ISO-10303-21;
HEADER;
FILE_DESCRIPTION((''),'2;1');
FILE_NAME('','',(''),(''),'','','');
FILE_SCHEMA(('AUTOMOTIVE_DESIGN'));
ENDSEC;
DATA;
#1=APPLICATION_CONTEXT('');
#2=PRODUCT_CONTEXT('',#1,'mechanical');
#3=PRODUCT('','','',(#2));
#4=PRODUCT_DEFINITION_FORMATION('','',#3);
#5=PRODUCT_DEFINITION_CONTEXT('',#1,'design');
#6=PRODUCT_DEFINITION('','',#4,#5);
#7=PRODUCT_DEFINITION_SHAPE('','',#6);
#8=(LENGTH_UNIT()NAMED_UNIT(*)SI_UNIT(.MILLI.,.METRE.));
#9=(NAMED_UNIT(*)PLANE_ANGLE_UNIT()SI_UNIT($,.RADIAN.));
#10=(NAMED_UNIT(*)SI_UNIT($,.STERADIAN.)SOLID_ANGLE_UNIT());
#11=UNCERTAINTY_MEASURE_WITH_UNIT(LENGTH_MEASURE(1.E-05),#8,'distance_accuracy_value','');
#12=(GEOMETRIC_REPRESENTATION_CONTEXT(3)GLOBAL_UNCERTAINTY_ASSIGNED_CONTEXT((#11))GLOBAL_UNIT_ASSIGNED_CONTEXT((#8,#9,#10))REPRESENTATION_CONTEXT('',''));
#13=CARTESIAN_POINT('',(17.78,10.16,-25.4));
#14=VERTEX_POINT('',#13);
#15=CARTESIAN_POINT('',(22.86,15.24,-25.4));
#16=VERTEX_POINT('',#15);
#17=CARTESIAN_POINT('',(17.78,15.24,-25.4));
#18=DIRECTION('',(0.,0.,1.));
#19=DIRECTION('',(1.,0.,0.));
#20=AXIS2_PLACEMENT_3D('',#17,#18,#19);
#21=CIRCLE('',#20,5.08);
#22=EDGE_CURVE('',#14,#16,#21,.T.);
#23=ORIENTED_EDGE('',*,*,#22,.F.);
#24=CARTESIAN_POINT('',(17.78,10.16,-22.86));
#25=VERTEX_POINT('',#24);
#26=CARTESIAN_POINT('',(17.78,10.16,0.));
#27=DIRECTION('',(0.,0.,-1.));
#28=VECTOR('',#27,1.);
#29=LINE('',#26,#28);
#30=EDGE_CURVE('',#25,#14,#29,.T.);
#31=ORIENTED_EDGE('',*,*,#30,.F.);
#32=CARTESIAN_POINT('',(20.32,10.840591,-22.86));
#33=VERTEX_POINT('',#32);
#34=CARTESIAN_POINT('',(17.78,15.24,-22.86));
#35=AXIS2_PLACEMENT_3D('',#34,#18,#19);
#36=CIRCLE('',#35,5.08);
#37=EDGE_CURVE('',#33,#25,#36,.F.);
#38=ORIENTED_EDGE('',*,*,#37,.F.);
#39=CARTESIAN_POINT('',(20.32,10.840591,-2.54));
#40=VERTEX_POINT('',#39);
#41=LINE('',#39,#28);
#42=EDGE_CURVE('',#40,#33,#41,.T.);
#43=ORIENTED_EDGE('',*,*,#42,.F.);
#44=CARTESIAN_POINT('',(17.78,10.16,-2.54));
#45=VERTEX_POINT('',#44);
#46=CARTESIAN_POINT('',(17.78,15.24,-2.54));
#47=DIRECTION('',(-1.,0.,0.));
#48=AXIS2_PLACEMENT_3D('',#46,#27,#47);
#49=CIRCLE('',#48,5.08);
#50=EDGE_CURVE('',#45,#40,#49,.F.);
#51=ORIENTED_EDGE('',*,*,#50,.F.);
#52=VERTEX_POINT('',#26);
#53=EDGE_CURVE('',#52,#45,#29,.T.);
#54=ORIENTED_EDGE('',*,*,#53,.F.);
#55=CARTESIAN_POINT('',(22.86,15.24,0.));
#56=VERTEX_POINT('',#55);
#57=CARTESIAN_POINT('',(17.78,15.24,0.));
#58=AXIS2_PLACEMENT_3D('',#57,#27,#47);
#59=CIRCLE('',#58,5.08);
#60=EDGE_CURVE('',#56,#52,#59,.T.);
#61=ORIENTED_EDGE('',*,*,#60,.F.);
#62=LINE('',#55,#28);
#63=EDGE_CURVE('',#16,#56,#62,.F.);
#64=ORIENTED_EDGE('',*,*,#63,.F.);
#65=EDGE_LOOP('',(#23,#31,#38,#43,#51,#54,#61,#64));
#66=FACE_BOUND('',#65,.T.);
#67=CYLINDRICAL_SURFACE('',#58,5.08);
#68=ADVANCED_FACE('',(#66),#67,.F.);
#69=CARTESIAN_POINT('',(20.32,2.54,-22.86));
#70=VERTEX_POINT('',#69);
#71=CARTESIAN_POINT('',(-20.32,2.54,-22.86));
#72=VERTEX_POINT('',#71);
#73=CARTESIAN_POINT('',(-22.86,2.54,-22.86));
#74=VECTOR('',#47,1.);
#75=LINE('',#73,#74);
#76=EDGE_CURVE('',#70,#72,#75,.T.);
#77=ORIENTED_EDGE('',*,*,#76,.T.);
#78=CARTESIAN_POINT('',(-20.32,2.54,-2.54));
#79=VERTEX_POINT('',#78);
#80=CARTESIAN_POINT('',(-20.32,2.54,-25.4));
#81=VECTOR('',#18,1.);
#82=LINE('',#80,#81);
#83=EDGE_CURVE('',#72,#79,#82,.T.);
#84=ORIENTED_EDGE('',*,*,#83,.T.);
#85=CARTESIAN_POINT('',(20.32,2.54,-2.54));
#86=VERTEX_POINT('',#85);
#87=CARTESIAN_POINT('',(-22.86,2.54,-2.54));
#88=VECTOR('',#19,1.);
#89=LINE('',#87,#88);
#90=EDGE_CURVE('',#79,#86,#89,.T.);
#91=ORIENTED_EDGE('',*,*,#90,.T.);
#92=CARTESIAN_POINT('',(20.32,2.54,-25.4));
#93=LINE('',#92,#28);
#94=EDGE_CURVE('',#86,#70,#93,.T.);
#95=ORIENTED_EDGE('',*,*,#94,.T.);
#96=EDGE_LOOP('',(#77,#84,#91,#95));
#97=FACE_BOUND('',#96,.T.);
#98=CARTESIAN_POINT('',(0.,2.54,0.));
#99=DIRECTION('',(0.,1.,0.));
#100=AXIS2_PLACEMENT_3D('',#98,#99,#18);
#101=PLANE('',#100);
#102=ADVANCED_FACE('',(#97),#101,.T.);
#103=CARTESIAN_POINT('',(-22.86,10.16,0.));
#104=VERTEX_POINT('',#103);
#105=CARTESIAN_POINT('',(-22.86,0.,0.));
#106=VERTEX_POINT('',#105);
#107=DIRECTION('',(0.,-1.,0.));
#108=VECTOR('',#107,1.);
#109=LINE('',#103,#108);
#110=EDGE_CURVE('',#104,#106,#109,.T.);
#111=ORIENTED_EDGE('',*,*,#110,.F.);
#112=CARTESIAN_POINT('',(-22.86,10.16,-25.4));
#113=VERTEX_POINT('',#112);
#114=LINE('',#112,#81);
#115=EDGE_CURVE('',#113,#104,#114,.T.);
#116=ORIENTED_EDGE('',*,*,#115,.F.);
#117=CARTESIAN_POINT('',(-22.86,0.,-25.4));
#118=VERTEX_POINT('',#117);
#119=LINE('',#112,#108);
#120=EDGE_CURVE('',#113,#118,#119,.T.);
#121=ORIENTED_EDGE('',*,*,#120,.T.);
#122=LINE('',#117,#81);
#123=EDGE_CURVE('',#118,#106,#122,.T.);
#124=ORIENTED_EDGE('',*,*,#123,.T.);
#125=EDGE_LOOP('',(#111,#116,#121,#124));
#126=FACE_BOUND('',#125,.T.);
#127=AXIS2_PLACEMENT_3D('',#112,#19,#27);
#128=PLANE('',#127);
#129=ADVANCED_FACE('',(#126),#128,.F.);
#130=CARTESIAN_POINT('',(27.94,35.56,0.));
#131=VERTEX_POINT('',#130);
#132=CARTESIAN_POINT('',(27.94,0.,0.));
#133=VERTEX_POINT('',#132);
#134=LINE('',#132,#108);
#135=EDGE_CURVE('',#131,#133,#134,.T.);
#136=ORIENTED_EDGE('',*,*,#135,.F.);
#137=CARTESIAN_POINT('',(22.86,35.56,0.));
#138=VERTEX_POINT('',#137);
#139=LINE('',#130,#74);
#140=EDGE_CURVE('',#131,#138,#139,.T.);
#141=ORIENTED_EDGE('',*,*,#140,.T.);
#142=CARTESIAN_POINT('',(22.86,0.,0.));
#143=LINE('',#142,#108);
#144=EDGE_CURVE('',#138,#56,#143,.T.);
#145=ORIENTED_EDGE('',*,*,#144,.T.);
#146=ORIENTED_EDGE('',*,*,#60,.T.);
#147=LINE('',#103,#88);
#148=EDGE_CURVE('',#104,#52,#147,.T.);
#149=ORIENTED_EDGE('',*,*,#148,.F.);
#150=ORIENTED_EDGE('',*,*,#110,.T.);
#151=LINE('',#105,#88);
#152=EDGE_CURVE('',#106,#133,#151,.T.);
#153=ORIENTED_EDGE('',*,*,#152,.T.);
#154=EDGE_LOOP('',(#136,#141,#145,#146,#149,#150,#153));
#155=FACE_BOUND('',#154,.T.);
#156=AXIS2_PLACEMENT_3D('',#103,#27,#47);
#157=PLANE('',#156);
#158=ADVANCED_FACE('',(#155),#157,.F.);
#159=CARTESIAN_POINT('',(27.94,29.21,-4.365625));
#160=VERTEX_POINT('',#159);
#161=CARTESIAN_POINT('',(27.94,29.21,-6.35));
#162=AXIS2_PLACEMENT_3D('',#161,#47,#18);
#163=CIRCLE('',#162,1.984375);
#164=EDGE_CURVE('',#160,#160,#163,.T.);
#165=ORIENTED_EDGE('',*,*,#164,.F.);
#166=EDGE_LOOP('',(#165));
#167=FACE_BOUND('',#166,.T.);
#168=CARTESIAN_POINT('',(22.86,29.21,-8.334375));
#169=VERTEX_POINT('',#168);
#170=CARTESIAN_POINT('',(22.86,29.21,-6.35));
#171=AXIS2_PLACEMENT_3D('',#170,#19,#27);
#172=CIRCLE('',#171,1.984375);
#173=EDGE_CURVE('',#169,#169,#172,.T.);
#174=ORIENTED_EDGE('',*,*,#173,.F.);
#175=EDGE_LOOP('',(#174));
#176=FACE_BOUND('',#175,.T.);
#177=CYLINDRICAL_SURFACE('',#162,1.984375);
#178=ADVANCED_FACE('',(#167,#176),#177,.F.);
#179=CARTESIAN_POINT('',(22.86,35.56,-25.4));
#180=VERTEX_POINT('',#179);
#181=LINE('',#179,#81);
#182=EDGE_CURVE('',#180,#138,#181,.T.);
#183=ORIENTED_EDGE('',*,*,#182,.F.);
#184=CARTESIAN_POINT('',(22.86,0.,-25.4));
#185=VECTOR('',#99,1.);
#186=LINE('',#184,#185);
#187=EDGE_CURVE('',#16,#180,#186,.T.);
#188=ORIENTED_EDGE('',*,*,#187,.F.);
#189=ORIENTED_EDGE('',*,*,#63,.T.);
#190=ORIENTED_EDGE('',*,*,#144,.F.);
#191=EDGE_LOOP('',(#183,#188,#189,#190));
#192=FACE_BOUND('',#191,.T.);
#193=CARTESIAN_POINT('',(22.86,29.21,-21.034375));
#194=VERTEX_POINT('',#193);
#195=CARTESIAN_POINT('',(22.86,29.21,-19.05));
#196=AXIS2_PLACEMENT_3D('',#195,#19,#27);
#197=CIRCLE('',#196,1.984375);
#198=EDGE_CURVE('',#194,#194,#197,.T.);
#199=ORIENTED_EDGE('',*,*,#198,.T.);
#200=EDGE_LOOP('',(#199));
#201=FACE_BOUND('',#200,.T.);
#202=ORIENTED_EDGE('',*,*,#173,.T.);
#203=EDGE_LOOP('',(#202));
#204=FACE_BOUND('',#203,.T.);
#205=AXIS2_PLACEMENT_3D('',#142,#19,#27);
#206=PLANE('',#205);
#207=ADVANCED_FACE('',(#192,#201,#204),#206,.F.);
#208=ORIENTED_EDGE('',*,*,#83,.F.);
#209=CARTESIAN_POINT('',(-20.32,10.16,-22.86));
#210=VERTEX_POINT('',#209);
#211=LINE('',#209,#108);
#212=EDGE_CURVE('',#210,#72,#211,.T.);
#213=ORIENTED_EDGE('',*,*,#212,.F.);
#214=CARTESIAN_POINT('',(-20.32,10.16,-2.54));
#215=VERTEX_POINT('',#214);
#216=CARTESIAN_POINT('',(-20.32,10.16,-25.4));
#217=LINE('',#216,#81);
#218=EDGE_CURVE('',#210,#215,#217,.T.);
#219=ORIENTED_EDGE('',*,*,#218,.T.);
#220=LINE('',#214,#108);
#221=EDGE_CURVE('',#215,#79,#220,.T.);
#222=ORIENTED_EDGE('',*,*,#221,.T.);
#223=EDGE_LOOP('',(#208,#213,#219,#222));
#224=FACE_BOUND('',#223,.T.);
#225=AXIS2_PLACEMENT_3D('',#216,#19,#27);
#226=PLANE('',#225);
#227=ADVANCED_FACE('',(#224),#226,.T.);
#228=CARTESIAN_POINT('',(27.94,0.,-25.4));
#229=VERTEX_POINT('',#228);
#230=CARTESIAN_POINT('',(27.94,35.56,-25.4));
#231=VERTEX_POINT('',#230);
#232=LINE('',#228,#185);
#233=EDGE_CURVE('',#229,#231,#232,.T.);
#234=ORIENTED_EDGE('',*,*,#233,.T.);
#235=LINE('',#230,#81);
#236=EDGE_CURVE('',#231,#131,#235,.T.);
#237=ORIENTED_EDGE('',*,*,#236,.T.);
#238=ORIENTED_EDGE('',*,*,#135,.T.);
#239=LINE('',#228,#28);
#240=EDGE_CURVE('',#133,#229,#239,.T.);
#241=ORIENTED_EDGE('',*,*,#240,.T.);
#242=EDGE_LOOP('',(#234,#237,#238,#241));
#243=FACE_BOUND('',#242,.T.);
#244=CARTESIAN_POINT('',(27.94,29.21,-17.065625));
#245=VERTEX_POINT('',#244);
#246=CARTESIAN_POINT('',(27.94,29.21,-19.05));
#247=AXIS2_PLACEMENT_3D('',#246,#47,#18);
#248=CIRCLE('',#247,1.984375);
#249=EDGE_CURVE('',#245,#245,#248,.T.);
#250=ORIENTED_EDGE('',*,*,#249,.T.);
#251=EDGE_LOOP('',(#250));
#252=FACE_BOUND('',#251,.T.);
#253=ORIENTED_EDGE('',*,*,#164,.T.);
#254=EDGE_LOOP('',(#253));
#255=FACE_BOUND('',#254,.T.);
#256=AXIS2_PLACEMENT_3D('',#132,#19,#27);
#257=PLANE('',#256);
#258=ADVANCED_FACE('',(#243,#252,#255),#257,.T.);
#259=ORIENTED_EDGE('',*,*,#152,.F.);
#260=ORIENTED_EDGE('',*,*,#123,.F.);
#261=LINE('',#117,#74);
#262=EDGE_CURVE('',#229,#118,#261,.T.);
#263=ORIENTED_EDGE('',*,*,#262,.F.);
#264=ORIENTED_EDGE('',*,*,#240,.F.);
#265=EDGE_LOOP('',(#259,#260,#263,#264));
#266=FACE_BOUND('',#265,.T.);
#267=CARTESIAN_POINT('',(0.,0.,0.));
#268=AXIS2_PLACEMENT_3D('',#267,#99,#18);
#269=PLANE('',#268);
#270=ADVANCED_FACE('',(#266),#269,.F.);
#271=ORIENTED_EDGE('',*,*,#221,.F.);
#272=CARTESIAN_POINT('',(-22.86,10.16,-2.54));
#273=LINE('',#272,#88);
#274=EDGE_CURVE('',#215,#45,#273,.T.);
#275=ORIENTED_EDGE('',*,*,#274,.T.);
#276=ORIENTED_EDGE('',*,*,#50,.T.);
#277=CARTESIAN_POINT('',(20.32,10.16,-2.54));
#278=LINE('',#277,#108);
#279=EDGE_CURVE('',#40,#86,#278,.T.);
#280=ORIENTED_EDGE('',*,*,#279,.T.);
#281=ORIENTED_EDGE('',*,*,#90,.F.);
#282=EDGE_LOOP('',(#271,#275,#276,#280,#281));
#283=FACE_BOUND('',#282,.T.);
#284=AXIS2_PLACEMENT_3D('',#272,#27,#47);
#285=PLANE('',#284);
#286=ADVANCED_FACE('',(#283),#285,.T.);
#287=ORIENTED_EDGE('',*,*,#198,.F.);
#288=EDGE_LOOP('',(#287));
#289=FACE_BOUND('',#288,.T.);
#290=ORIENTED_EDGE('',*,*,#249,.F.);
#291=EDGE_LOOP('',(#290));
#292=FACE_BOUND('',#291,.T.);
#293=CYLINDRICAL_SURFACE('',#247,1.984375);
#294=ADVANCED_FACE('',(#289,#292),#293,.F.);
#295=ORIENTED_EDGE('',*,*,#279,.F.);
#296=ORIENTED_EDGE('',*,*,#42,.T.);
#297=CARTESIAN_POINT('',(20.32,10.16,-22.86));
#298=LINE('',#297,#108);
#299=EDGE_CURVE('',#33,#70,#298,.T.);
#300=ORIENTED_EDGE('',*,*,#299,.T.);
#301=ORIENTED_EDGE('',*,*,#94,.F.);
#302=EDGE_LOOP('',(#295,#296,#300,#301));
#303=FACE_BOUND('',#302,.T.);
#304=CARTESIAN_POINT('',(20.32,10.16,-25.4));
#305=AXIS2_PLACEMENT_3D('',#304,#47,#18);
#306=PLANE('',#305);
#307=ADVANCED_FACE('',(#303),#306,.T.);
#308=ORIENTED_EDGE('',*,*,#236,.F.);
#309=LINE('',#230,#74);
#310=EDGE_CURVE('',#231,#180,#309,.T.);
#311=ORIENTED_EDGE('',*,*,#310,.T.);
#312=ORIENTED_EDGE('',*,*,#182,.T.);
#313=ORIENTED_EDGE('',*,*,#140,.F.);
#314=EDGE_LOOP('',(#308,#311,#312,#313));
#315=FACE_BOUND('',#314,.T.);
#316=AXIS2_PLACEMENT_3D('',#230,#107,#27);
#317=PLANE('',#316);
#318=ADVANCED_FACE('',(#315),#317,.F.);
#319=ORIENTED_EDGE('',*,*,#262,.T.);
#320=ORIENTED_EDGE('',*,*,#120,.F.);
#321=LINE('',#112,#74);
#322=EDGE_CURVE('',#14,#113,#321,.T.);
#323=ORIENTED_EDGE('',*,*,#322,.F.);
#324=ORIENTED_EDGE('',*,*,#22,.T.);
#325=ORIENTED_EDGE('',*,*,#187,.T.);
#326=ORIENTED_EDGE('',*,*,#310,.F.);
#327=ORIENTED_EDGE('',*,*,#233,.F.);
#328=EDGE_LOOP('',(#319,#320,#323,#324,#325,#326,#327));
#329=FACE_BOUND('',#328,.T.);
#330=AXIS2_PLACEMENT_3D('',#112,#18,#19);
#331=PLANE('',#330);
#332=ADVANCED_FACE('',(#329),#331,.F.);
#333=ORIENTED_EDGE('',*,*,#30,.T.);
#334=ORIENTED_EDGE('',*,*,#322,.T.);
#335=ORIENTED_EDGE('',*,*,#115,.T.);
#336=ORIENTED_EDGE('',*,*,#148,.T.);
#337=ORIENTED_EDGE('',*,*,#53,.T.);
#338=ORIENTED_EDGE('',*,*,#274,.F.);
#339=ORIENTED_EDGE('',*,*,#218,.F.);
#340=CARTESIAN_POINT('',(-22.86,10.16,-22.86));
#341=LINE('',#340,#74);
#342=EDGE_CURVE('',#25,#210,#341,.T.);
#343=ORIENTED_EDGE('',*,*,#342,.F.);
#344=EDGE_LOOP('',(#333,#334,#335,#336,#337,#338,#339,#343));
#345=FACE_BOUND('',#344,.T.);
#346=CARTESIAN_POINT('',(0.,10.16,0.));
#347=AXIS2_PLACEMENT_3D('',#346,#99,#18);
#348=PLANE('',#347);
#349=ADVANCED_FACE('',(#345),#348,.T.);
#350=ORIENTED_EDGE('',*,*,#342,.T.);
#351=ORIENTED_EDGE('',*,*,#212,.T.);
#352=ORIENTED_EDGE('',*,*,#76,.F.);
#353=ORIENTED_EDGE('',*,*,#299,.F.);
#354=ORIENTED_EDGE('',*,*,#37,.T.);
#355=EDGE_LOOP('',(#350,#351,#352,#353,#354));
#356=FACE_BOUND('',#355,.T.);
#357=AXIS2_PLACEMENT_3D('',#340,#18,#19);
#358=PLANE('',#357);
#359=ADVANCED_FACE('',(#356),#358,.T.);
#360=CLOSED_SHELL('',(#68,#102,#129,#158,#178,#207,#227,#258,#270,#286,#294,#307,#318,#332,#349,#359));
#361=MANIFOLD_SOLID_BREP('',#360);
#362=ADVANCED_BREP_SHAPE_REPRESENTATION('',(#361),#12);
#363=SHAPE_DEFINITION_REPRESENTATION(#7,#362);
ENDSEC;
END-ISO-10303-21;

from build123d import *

# Parameters (mm, degrees)
SKETCH1_W               = 45.72
SKETCH1_H               = 25.4
BOSS_EXTRUDE1_DEPTH     = 10.16
SHELL1_T                = -2.54
SKETCH2_W               = 25.4
SKETCH2_H               = 35.56
BOSS_EXTRUDE2_DEPTH     = 5.08
FILLET1_R               = 5.08
CUT_EXTRUDE1_DEPTH      = 64.245489958
CUT_EXTRUDE1_DEPTH_BACK = 64.245489958
SKETCH3_R               = 1.984375


with BuildPart() as part:
    # Sketch1 → Boss-Extrude1 (new body)
    with BuildSketch(Plane(origin=(0, 0, 0), x_dir=(1, 0, 0), z_dir=(0, 1, 0))):
        with Locations((0, 12.7)):
            Rectangle(SKETCH1_W, SKETCH1_H)
    extrude(amount=BOSS_EXTRUDE1_DEPTH)

    # Shell1
    shell1_openings = [part.faces().sort_by_distance(p)[0] for p in [
        (0, 10.16, -12.7),
    ]]
    offset(amount=SHELL1_T, openings=shell1_openings, kind=Kind.INTERSECTION)

    # Sketch2 → Boss-Extrude2 (add)
    with BuildSketch(Plane(origin=(22.86, 0, 0), x_dir=(0, 0, -1), z_dir=(1, 0, 0))):
        with Locations((12.7, 17.78)):
            Rectangle(SKETCH2_W, SKETCH2_H)
    extrude(amount=BOSS_EXTRUDE2_DEPTH)

    # Fillet1
    # the kernel refuses this fillet: 5.08 mm, written as the material it adds along each edge
    with BuildSketch(Plane(origin=(22.86, 10.16, -25.4), x_dir=(0, 1, 0), z_dir=(0, 0, 1))) as fillet1_piece_1_section:
        with BuildLine():
            CenterArc((FILLET1_R, FILLET1_R), FILLET1_R, 180, 90)
            Line((0, FILLET1_R), (0, 0))
            Line((0, 0), (FILLET1_R, 0))
        make_face()
    fillet1_piece_1 = extrude(amount=25.4, mode=Mode.PRIVATE)
    fillet1_piece_1 = split(fillet1_piece_1, bisect_by=Plane(origin=(22.024889837, 11.456009905, -22.86), z_dir=(0, 0, -1)), keep=Keep.TOP, mode=Mode.PRIVATE)
    fillet1_piece_1 = split(fillet1_piece_1, bisect_by=Plane(origin=(20.32, 11.456009905, -24.13), z_dir=(1, 0, 0)), keep=Keep.TOP, mode=Mode.PRIVATE)
    add(fillet1_piece_1)
    with BuildSketch(Plane(origin=(22.86, 10.16, -25.4), x_dir=(0, 1, 0), z_dir=(0, 0, 1))) as fillet1_piece_2_section:
        with BuildLine():
            CenterArc((FILLET1_R, FILLET1_R), FILLET1_R, 180, 90)
            Line((0, FILLET1_R), (0, 0))
            Line((0, 0), (FILLET1_R, 0))
        make_face()
    fillet1_piece_2 = extrude(amount=25.4, mode=Mode.PRIVATE)
    fillet1_piece_2 = split(fillet1_piece_2, bisect_by=Plane(origin=(19.490686015, 10.281962579, -22.86), z_dir=(0, 0, -1)), keep=Keep.TOP, mode=Mode.PRIVATE)
    fillet1_piece_2 = split(fillet1_piece_2, bisect_by=Plane(origin=(20.32, 10.281962579, -24.13), z_dir=(-1, 0, 0)), keep=Keep.TOP, mode=Mode.PRIVATE)
    add(fillet1_piece_2)
    with BuildSketch(Plane(origin=(22.86, 10.16, -25.4), x_dir=(0, 1, 0), z_dir=(0, 0, 1))) as fillet1_piece_3_section:
        with BuildLine():
            CenterArc((FILLET1_R, FILLET1_R), FILLET1_R, 180, 90)
            Line((0, FILLET1_R), (0, 0))
            Line((0, 0), (FILLET1_R, 0))
        make_face()
    fillet1_piece_3 = extrude(amount=25.4, mode=Mode.PRIVATE)
    fillet1_piece_3 = split(fillet1_piece_3, bisect_by=Plane(origin=(22.024889837, 11.456009905, -22.86), z_dir=(0, 0, 1)), keep=Keep.TOP, mode=Mode.PRIVATE)
    fillet1_piece_3 = split(fillet1_piece_3, bisect_by=Plane(origin=(22.024889837, 11.456009905, -2.54), z_dir=(0, 0, -1)), keep=Keep.TOP, mode=Mode.PRIVATE)
    fillet1_piece_3 = split(fillet1_piece_3, bisect_by=Plane(origin=(20.32, 11.456009905, -12.7), z_dir=(1, 0, 0)), keep=Keep.TOP, mode=Mode.PRIVATE)
    add(fillet1_piece_3)
    with BuildSketch(Plane(origin=(22.86, 10.16, -25.4), x_dir=(0, 1, 0), z_dir=(0, 0, 1))) as fillet1_piece_4_section:
        with BuildLine():
            CenterArc((FILLET1_R, FILLET1_R), FILLET1_R, 180, 90)
            Line((0, FILLET1_R), (0, 0))
            Line((0, 0), (FILLET1_R, 0))
        make_face()
    fillet1_piece_4 = extrude(amount=25.4, mode=Mode.PRIVATE)
    fillet1_piece_4 = split(fillet1_piece_4, bisect_by=Plane(origin=(22.024889837, 11.456009905, -2.54), z_dir=(0, 0, 1)), keep=Keep.TOP, mode=Mode.PRIVATE)
    fillet1_piece_4 = split(fillet1_piece_4, bisect_by=Plane(origin=(20.32, 11.456009905, -1.27), z_dir=(1, 0, 0)), keep=Keep.TOP, mode=Mode.PRIVATE)
    add(fillet1_piece_4)
    with BuildSketch(Plane(origin=(22.86, 10.16, -25.4), x_dir=(0, 1, 0), z_dir=(0, 0, 1))) as fillet1_piece_5_section:
        with BuildLine():
            CenterArc((FILLET1_R, FILLET1_R), FILLET1_R, 180, 90)
            Line((0, FILLET1_R), (0, 0))
            Line((0, 0), (FILLET1_R, 0))
        make_face()
    fillet1_piece_5 = extrude(amount=25.4, mode=Mode.PRIVATE)
    fillet1_piece_5 = split(fillet1_piece_5, bisect_by=Plane(origin=(19.490686015, 10.281962579, -2.54), z_dir=(0, 0, 1)), keep=Keep.TOP, mode=Mode.PRIVATE)
    fillet1_piece_5 = split(fillet1_piece_5, bisect_by=Plane(origin=(20.32, 10.281962579, -1.27), z_dir=(-1, 0, 0)), keep=Keep.TOP, mode=Mode.PRIVATE)
    add(fillet1_piece_5)

    # Sketch3 → Cut-Extrude1 (cut, two sides: drawn at the far end of the back side and taken through both)
    with BuildSketch(Plane.ZY.offset(-22.86).offset(-CUT_EXTRUDE1_DEPTH_BACK)):
        with Locations((-19.05, 29.21)):
            Circle(SKETCH3_R)
        with Locations((-6.35, 29.21)):
            Circle(SKETCH3_R)
    extrude(amount=CUT_EXTRUDE1_DEPTH + CUT_EXTRUDE1_DEPTH_BACK, mode=Mode.SUBTRACT)


solid = part.part
